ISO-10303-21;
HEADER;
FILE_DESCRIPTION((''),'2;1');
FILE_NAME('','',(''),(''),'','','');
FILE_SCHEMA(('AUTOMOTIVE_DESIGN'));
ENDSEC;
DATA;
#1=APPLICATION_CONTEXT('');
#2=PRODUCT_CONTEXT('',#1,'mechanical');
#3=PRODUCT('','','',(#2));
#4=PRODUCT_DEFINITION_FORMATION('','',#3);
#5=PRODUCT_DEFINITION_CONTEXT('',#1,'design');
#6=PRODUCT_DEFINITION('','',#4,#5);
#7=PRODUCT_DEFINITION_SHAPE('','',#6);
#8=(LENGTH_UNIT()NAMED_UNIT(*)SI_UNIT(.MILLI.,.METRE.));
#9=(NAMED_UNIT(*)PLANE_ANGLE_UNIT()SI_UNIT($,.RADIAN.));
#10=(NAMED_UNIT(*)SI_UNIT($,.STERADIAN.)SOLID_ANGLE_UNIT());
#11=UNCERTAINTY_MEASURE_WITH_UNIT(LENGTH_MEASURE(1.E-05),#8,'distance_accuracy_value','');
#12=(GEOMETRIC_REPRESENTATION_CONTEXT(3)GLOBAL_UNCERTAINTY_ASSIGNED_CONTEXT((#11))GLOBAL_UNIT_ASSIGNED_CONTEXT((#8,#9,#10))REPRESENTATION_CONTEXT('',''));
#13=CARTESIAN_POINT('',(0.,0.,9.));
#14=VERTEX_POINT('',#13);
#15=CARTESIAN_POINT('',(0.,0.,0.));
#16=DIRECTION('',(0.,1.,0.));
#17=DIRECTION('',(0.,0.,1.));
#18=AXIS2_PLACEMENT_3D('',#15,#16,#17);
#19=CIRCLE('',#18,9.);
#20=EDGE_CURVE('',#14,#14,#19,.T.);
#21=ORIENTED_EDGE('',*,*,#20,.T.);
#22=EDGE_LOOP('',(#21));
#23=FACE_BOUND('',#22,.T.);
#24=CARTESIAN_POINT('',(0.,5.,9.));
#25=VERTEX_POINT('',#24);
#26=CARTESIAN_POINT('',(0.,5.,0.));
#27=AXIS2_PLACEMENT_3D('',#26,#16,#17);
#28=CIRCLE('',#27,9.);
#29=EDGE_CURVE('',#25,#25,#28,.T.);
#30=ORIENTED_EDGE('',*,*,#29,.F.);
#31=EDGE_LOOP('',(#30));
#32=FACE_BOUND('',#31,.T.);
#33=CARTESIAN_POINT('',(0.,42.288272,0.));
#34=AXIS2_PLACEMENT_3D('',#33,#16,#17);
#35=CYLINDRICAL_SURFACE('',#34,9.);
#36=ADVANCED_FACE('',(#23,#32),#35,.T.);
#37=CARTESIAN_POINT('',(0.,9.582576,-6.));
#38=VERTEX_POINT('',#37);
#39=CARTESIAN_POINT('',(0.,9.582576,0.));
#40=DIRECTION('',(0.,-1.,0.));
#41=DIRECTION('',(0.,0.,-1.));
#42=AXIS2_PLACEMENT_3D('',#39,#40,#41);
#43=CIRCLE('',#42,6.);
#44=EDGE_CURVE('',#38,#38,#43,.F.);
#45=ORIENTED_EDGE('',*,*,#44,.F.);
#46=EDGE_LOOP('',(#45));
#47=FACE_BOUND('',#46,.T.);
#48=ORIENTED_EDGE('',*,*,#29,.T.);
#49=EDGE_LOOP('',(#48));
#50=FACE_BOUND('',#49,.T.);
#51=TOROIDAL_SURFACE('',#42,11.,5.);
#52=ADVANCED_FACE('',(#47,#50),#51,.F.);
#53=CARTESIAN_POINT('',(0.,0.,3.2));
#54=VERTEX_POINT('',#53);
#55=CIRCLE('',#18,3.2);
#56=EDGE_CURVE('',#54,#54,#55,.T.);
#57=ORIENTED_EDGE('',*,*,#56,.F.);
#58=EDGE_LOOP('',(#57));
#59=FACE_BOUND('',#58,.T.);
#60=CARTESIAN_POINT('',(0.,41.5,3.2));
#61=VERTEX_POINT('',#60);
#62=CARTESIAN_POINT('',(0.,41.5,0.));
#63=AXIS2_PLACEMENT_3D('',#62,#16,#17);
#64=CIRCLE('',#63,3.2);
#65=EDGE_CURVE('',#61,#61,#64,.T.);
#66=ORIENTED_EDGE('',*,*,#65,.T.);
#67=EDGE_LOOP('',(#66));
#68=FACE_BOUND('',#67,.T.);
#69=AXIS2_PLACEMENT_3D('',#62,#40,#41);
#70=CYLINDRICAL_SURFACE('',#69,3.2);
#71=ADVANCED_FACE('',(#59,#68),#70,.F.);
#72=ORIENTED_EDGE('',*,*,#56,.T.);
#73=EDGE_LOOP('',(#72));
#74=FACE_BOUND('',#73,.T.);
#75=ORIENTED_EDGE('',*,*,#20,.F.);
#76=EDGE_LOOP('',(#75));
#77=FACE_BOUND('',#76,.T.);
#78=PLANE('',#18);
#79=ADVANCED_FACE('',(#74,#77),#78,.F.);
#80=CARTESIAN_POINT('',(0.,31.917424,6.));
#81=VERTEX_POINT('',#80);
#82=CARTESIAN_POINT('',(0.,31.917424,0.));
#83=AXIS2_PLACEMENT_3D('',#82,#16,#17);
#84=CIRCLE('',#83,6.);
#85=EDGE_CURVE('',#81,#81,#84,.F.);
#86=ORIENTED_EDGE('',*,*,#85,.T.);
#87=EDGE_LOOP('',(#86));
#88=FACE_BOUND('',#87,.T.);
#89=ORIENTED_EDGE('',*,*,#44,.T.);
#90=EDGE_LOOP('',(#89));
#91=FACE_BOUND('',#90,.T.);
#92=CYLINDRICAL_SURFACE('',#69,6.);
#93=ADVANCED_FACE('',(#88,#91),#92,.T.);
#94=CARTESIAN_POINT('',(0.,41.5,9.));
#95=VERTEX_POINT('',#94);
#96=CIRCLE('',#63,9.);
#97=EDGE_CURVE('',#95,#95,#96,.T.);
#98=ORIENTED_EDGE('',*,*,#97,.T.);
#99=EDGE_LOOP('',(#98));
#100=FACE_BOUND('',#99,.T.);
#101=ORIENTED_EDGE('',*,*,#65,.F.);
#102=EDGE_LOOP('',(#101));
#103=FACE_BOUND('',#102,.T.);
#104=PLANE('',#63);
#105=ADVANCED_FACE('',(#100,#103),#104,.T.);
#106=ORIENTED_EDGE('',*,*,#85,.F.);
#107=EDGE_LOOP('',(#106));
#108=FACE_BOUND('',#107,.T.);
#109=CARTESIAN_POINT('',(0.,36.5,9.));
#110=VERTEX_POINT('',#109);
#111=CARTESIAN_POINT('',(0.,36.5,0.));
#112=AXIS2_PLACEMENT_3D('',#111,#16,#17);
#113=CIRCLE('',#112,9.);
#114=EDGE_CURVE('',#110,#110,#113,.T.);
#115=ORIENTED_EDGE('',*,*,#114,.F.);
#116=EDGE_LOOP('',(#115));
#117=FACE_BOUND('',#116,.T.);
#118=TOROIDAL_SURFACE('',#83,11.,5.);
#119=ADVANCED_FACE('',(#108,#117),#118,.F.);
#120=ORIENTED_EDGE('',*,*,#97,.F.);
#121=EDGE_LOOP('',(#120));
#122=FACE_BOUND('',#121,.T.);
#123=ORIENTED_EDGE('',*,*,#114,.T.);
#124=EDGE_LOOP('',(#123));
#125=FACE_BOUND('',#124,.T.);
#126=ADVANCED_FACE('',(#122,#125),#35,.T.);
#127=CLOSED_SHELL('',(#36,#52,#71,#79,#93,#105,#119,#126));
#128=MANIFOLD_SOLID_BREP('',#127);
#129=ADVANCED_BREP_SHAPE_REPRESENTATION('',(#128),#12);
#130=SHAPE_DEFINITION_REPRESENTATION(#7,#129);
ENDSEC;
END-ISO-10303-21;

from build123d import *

# Parameters (mm, degrees)
SKETCH1_R           = 6
SKETCH1_R_2         = 3.2
BOSS_EXTRUDE1_DEPTH = 41.5
SKETCH2_W           = 3
SKETCH2_H           = 5
FILLET1_R           = 5


with BuildPart() as part:
    # Sketch1 → Boss-Extrude1 (new body)
    with BuildSketch(Plane(origin=(0, 0, 0), x_dir=(1, 0, 0), z_dir=(0, 1, 0))):
        with Locations(Location((0, 0, 0), (0, 0, 270))):
            Circle(SKETCH1_R)
        with Locations(Location((0, 0, 0), (0, 0, 270))):
            Circle(SKETCH1_R_2, mode=Mode.SUBTRACT)
    extrude(amount=BOSS_EXTRUDE1_DEPTH)

    # Sketch2 → Revolve1 (revolve)
    with BuildSketch(Plane.XY, mode=Mode.PRIVATE) as revolve1_sk:
        with Locations((7.5, 39)):
            Rectangle(SKETCH2_W, SKETCH2_H)
        with Locations((7.5, 2.5)):
            Rectangle(SKETCH2_W, SKETCH2_H)
    revolve(revolve1_sk.sketch.rotate(Axis((0, 42.288271676, 0), (0, -1, 0)), 90), axis=Axis((0, 42.288271676, 0), (0, -1, 0)))

    # Fillet1
    # the kernel refuses this fillet: 5 mm, written as the material it adds along each edge
    with BuildSketch(Plane(origin=(0, 5, 0), x_dir=(0, 0, 1), z_dir=(1, 0, 0))) as fillet1_piece_1:
        with BuildLine():
            CenterArc((11, -4.582575695), FILLET1_R, 113.578178478, 66.421821522)
            Line((9, 0), (8.96, 0.091651514))
            ThreePointArc((8.96, 0.091651514), (7.5, 0.1), (6, 0.1))
            Line((6, 0.1), (5.9, 0))
            Line((5.9, 0), (5.9, -4.582575695))
            Line((5.9, -4.582575695), (6, -4.582575695))
        make_face()
    revolve(axis=Axis((0, 5, 0), (0, -1, 0)))
    with BuildSketch(Plane(origin=(0, 36.5, 0), x_dir=(0, 0, 1), z_dir=(1, 0, 0))) as fillet1_piece_2:
        with BuildLine():
            CenterArc((11, 4.582575695), FILLET1_R, 180, 66.421821522)
            Line((9, 0), (8.96, -0.091651514))
            ThreePointArc((8.96, -0.091651514), (7.5, -0.1), (6, -0.1))
            Line((6, -0.1), (5.9, 0))
            Line((5.9, 0), (5.9, 4.582575695))
            Line((5.9, 4.582575695), (6, 4.582575695))
        make_face()
    revolve(axis=Axis((0, 36.5, 0), (0, -1, 0)))


solid = part.part
